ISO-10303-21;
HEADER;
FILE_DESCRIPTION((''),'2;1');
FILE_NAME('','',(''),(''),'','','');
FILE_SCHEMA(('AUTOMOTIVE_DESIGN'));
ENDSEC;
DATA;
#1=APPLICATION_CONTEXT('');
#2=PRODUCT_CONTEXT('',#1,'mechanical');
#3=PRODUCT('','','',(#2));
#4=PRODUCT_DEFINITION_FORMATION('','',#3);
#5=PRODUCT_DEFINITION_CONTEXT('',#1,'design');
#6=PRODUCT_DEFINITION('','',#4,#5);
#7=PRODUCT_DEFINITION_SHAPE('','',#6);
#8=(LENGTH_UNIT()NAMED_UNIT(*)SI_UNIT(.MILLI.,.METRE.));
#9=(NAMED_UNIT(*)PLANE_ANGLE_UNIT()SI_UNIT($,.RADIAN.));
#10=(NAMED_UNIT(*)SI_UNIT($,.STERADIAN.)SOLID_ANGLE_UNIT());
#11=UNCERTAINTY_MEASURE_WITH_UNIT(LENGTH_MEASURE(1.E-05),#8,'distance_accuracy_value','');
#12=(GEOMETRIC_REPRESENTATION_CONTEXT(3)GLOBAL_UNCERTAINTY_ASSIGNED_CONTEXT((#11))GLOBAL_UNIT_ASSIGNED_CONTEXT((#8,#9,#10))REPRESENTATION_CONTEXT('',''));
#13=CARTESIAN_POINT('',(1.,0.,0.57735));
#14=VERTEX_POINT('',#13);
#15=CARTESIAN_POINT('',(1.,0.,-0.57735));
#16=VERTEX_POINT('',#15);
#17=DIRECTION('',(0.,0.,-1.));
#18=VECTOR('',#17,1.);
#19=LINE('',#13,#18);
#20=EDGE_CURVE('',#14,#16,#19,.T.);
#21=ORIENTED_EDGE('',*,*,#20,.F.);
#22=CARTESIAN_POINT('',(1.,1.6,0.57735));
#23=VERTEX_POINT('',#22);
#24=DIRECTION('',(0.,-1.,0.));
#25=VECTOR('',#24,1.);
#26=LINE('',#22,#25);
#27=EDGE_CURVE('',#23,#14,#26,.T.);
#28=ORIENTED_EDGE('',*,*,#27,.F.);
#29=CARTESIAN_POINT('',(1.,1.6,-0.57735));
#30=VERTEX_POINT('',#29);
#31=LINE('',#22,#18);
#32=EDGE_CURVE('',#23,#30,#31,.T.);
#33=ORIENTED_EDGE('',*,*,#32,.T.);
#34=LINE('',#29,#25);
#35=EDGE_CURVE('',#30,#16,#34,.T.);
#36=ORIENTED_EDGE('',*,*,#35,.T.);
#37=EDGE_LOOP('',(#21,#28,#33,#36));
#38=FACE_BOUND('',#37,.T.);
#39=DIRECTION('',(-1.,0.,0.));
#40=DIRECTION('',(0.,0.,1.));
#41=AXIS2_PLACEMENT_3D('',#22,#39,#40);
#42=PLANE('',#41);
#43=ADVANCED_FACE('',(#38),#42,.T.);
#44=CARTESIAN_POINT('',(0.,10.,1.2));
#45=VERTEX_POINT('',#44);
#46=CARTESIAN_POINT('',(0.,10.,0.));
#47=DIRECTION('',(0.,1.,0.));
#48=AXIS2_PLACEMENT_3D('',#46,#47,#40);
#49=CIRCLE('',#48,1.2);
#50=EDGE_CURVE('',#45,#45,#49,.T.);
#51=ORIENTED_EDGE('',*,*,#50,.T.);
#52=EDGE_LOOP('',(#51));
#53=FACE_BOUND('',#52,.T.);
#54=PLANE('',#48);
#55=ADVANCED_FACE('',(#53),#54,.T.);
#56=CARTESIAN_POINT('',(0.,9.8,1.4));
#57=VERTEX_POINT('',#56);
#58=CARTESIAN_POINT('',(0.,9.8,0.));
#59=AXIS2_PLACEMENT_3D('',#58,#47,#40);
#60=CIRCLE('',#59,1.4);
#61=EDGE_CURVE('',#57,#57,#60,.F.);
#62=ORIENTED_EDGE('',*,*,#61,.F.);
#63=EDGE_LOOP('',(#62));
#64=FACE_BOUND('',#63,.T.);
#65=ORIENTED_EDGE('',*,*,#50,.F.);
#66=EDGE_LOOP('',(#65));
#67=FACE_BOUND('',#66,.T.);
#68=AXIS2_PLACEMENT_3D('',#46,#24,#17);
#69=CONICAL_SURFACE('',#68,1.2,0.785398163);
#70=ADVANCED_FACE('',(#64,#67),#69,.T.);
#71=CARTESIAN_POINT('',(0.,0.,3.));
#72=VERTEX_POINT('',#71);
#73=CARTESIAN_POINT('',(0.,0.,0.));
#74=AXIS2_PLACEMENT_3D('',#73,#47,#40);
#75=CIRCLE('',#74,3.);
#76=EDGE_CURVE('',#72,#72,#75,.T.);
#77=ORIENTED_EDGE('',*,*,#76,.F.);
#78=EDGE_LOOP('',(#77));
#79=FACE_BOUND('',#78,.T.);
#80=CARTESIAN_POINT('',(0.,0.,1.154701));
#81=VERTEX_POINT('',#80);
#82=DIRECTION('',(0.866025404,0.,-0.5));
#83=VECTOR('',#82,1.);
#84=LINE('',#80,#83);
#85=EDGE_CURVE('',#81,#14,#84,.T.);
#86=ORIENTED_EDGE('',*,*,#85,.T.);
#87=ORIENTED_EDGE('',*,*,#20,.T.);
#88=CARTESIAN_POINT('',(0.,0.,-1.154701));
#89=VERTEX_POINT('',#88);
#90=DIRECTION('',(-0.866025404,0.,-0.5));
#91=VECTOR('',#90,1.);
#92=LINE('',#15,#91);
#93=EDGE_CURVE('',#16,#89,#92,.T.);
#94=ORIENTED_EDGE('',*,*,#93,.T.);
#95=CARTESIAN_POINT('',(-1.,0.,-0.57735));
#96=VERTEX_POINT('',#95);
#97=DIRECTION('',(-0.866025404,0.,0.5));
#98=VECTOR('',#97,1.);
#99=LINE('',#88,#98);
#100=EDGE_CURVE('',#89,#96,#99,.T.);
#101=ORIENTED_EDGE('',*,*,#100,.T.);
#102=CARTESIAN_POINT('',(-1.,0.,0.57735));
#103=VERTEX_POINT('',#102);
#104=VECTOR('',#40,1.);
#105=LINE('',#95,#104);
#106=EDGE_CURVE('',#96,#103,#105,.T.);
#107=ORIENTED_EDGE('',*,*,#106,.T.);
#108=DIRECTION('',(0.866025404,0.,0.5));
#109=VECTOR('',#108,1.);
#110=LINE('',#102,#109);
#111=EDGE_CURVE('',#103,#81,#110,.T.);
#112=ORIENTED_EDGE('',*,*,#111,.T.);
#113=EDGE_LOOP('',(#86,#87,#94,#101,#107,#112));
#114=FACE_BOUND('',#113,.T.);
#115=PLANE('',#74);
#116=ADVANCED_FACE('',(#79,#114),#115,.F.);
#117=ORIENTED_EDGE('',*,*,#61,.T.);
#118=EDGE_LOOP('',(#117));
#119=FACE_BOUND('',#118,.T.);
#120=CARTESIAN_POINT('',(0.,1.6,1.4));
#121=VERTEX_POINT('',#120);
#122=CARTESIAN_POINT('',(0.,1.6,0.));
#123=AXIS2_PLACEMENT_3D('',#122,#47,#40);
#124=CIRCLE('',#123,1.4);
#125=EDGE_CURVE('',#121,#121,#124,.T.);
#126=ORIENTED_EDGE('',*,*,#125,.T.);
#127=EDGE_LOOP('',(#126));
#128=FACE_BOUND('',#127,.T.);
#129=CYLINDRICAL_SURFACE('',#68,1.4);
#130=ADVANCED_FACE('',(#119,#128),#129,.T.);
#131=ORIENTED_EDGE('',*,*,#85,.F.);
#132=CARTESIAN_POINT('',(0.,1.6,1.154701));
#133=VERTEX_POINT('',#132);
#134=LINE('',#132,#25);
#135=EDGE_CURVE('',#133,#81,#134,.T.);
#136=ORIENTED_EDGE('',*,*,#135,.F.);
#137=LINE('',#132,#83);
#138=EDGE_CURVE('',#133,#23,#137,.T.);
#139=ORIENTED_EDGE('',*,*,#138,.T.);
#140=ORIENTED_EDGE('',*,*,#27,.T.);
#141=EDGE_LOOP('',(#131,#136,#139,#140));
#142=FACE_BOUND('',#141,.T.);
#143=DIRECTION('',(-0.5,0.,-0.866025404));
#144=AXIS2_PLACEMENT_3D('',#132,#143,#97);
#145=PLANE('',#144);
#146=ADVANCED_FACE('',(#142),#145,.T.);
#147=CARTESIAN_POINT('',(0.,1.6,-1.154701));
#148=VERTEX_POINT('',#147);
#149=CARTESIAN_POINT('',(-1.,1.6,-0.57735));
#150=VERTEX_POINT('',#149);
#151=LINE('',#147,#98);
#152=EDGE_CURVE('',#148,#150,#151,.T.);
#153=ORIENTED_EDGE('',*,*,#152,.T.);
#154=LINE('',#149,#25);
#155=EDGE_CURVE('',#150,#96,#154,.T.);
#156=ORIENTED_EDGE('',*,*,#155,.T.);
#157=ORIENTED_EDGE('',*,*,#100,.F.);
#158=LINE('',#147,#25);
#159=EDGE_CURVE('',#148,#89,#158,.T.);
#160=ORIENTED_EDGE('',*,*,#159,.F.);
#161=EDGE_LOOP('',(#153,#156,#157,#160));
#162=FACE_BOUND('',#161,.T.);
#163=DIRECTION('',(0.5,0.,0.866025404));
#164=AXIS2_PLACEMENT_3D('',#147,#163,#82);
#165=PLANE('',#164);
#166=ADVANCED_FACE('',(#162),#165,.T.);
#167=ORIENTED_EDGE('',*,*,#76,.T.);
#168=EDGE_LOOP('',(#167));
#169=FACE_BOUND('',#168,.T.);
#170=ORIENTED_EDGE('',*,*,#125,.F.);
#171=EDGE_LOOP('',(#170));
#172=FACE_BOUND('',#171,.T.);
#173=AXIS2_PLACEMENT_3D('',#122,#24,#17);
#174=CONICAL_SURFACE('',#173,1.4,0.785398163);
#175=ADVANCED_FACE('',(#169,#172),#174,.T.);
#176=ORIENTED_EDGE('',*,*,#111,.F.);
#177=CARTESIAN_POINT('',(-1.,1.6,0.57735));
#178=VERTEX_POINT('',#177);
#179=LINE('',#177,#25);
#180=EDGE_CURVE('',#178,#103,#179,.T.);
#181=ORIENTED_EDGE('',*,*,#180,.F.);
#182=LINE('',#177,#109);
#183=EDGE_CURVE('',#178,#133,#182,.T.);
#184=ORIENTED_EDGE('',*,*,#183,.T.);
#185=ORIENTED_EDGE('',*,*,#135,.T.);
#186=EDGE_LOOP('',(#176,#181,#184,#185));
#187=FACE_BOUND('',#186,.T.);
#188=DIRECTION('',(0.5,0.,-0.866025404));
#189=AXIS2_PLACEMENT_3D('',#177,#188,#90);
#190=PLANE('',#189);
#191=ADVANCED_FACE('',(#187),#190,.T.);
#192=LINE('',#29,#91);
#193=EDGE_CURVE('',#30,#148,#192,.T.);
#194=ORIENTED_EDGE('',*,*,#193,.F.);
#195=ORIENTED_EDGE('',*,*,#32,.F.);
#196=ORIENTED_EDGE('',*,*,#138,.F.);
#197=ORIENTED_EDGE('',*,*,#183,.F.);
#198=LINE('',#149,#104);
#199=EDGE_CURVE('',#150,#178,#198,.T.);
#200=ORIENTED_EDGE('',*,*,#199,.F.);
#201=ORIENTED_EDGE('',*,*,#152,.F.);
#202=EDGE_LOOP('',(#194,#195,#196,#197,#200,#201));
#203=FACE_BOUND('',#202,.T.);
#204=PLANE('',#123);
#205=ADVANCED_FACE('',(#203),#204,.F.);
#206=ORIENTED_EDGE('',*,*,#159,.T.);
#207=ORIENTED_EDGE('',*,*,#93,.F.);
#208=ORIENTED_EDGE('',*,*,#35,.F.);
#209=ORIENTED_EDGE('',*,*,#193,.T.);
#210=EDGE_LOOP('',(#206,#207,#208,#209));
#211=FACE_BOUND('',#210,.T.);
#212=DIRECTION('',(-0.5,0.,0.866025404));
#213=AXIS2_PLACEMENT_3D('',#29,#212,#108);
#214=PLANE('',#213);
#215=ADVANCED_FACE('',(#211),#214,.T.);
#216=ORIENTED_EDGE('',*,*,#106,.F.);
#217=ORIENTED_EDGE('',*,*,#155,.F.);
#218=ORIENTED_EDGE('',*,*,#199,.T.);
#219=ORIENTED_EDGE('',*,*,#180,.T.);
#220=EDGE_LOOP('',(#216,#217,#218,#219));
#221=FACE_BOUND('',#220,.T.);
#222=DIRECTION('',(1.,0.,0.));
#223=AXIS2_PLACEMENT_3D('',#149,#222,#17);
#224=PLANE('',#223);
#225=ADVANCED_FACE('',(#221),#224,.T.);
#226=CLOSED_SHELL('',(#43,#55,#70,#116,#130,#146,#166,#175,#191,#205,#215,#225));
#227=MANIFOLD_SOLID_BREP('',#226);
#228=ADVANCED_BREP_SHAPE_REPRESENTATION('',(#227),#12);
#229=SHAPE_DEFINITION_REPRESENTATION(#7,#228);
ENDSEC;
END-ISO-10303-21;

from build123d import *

# Parameters (mm, degrees)
SKETCH_1_R      = 3
EXTRUDE_1_DEPTH = 1.6
CHAMFER_1_SIZE  = 1.6
SKETCH_2_R      = 1.4
EXTRUDE_2_DEPTH = 8.4
CHAMFER_2_SIZE  = 0.2


with BuildPart() as part:
    # 草图1 → 凸台-拉伸1 (new body)
    with BuildSketch(Plane(origin=(0, 0, 0), x_dir=(1, 0, 0), z_dir=(0, 1, 0))):
        with Locations(Location((0, 0, 0), (0, 0, 270))):
            Circle(SKETCH_1_R)
        Polygon((0, -1.154700538), (1, -0.577350269), (1, 0.577350269), (0, 1.154700538), (-1, 0.577350269), (-1, -0.577350269), align=None, mode=Mode.SUBTRACT)
    extrude(amount=EXTRUDE_1_DEPTH)

    # 倒角1
    # the kernel refuses this chamfer: 1.6 mm, written as the material it takes off along each edge
    with BuildSketch(Plane(origin=(0, 1.6, 0), x_dir=(0, 0, 1), z_dir=(-1, 0, 0))) as chamfer_1_piece_1:
        Polygon((3, -CHAMFER_1_SIZE), (3 - CHAMFER_1_SIZE, 0), (3, 0), align=None)
    revolve(axis=Axis((0, 1.6, 0), (0, 1, 0)), mode=Mode.SUBTRACT)

    # 草图2 → 凸台-拉伸2 (add)
    with BuildSketch(Plane(origin=(0, 1.6, 0), x_dir=(1, 0, 0), z_dir=(0, 1, 0))):
        with Locations(Location((0, 0, 0), (0, 0, 270))):
            Circle(SKETCH_2_R)
    extrude(amount=EXTRUDE_2_DEPTH)

    # 倒角2
    chamfer_2_edges = [part.edges().sort_by_distance(p)[0] for p in [
        (0, 10, -1.4),
    ]]
    chamfer(chamfer_2_edges, length=CHAMFER_2_SIZE)


solid = part.part
